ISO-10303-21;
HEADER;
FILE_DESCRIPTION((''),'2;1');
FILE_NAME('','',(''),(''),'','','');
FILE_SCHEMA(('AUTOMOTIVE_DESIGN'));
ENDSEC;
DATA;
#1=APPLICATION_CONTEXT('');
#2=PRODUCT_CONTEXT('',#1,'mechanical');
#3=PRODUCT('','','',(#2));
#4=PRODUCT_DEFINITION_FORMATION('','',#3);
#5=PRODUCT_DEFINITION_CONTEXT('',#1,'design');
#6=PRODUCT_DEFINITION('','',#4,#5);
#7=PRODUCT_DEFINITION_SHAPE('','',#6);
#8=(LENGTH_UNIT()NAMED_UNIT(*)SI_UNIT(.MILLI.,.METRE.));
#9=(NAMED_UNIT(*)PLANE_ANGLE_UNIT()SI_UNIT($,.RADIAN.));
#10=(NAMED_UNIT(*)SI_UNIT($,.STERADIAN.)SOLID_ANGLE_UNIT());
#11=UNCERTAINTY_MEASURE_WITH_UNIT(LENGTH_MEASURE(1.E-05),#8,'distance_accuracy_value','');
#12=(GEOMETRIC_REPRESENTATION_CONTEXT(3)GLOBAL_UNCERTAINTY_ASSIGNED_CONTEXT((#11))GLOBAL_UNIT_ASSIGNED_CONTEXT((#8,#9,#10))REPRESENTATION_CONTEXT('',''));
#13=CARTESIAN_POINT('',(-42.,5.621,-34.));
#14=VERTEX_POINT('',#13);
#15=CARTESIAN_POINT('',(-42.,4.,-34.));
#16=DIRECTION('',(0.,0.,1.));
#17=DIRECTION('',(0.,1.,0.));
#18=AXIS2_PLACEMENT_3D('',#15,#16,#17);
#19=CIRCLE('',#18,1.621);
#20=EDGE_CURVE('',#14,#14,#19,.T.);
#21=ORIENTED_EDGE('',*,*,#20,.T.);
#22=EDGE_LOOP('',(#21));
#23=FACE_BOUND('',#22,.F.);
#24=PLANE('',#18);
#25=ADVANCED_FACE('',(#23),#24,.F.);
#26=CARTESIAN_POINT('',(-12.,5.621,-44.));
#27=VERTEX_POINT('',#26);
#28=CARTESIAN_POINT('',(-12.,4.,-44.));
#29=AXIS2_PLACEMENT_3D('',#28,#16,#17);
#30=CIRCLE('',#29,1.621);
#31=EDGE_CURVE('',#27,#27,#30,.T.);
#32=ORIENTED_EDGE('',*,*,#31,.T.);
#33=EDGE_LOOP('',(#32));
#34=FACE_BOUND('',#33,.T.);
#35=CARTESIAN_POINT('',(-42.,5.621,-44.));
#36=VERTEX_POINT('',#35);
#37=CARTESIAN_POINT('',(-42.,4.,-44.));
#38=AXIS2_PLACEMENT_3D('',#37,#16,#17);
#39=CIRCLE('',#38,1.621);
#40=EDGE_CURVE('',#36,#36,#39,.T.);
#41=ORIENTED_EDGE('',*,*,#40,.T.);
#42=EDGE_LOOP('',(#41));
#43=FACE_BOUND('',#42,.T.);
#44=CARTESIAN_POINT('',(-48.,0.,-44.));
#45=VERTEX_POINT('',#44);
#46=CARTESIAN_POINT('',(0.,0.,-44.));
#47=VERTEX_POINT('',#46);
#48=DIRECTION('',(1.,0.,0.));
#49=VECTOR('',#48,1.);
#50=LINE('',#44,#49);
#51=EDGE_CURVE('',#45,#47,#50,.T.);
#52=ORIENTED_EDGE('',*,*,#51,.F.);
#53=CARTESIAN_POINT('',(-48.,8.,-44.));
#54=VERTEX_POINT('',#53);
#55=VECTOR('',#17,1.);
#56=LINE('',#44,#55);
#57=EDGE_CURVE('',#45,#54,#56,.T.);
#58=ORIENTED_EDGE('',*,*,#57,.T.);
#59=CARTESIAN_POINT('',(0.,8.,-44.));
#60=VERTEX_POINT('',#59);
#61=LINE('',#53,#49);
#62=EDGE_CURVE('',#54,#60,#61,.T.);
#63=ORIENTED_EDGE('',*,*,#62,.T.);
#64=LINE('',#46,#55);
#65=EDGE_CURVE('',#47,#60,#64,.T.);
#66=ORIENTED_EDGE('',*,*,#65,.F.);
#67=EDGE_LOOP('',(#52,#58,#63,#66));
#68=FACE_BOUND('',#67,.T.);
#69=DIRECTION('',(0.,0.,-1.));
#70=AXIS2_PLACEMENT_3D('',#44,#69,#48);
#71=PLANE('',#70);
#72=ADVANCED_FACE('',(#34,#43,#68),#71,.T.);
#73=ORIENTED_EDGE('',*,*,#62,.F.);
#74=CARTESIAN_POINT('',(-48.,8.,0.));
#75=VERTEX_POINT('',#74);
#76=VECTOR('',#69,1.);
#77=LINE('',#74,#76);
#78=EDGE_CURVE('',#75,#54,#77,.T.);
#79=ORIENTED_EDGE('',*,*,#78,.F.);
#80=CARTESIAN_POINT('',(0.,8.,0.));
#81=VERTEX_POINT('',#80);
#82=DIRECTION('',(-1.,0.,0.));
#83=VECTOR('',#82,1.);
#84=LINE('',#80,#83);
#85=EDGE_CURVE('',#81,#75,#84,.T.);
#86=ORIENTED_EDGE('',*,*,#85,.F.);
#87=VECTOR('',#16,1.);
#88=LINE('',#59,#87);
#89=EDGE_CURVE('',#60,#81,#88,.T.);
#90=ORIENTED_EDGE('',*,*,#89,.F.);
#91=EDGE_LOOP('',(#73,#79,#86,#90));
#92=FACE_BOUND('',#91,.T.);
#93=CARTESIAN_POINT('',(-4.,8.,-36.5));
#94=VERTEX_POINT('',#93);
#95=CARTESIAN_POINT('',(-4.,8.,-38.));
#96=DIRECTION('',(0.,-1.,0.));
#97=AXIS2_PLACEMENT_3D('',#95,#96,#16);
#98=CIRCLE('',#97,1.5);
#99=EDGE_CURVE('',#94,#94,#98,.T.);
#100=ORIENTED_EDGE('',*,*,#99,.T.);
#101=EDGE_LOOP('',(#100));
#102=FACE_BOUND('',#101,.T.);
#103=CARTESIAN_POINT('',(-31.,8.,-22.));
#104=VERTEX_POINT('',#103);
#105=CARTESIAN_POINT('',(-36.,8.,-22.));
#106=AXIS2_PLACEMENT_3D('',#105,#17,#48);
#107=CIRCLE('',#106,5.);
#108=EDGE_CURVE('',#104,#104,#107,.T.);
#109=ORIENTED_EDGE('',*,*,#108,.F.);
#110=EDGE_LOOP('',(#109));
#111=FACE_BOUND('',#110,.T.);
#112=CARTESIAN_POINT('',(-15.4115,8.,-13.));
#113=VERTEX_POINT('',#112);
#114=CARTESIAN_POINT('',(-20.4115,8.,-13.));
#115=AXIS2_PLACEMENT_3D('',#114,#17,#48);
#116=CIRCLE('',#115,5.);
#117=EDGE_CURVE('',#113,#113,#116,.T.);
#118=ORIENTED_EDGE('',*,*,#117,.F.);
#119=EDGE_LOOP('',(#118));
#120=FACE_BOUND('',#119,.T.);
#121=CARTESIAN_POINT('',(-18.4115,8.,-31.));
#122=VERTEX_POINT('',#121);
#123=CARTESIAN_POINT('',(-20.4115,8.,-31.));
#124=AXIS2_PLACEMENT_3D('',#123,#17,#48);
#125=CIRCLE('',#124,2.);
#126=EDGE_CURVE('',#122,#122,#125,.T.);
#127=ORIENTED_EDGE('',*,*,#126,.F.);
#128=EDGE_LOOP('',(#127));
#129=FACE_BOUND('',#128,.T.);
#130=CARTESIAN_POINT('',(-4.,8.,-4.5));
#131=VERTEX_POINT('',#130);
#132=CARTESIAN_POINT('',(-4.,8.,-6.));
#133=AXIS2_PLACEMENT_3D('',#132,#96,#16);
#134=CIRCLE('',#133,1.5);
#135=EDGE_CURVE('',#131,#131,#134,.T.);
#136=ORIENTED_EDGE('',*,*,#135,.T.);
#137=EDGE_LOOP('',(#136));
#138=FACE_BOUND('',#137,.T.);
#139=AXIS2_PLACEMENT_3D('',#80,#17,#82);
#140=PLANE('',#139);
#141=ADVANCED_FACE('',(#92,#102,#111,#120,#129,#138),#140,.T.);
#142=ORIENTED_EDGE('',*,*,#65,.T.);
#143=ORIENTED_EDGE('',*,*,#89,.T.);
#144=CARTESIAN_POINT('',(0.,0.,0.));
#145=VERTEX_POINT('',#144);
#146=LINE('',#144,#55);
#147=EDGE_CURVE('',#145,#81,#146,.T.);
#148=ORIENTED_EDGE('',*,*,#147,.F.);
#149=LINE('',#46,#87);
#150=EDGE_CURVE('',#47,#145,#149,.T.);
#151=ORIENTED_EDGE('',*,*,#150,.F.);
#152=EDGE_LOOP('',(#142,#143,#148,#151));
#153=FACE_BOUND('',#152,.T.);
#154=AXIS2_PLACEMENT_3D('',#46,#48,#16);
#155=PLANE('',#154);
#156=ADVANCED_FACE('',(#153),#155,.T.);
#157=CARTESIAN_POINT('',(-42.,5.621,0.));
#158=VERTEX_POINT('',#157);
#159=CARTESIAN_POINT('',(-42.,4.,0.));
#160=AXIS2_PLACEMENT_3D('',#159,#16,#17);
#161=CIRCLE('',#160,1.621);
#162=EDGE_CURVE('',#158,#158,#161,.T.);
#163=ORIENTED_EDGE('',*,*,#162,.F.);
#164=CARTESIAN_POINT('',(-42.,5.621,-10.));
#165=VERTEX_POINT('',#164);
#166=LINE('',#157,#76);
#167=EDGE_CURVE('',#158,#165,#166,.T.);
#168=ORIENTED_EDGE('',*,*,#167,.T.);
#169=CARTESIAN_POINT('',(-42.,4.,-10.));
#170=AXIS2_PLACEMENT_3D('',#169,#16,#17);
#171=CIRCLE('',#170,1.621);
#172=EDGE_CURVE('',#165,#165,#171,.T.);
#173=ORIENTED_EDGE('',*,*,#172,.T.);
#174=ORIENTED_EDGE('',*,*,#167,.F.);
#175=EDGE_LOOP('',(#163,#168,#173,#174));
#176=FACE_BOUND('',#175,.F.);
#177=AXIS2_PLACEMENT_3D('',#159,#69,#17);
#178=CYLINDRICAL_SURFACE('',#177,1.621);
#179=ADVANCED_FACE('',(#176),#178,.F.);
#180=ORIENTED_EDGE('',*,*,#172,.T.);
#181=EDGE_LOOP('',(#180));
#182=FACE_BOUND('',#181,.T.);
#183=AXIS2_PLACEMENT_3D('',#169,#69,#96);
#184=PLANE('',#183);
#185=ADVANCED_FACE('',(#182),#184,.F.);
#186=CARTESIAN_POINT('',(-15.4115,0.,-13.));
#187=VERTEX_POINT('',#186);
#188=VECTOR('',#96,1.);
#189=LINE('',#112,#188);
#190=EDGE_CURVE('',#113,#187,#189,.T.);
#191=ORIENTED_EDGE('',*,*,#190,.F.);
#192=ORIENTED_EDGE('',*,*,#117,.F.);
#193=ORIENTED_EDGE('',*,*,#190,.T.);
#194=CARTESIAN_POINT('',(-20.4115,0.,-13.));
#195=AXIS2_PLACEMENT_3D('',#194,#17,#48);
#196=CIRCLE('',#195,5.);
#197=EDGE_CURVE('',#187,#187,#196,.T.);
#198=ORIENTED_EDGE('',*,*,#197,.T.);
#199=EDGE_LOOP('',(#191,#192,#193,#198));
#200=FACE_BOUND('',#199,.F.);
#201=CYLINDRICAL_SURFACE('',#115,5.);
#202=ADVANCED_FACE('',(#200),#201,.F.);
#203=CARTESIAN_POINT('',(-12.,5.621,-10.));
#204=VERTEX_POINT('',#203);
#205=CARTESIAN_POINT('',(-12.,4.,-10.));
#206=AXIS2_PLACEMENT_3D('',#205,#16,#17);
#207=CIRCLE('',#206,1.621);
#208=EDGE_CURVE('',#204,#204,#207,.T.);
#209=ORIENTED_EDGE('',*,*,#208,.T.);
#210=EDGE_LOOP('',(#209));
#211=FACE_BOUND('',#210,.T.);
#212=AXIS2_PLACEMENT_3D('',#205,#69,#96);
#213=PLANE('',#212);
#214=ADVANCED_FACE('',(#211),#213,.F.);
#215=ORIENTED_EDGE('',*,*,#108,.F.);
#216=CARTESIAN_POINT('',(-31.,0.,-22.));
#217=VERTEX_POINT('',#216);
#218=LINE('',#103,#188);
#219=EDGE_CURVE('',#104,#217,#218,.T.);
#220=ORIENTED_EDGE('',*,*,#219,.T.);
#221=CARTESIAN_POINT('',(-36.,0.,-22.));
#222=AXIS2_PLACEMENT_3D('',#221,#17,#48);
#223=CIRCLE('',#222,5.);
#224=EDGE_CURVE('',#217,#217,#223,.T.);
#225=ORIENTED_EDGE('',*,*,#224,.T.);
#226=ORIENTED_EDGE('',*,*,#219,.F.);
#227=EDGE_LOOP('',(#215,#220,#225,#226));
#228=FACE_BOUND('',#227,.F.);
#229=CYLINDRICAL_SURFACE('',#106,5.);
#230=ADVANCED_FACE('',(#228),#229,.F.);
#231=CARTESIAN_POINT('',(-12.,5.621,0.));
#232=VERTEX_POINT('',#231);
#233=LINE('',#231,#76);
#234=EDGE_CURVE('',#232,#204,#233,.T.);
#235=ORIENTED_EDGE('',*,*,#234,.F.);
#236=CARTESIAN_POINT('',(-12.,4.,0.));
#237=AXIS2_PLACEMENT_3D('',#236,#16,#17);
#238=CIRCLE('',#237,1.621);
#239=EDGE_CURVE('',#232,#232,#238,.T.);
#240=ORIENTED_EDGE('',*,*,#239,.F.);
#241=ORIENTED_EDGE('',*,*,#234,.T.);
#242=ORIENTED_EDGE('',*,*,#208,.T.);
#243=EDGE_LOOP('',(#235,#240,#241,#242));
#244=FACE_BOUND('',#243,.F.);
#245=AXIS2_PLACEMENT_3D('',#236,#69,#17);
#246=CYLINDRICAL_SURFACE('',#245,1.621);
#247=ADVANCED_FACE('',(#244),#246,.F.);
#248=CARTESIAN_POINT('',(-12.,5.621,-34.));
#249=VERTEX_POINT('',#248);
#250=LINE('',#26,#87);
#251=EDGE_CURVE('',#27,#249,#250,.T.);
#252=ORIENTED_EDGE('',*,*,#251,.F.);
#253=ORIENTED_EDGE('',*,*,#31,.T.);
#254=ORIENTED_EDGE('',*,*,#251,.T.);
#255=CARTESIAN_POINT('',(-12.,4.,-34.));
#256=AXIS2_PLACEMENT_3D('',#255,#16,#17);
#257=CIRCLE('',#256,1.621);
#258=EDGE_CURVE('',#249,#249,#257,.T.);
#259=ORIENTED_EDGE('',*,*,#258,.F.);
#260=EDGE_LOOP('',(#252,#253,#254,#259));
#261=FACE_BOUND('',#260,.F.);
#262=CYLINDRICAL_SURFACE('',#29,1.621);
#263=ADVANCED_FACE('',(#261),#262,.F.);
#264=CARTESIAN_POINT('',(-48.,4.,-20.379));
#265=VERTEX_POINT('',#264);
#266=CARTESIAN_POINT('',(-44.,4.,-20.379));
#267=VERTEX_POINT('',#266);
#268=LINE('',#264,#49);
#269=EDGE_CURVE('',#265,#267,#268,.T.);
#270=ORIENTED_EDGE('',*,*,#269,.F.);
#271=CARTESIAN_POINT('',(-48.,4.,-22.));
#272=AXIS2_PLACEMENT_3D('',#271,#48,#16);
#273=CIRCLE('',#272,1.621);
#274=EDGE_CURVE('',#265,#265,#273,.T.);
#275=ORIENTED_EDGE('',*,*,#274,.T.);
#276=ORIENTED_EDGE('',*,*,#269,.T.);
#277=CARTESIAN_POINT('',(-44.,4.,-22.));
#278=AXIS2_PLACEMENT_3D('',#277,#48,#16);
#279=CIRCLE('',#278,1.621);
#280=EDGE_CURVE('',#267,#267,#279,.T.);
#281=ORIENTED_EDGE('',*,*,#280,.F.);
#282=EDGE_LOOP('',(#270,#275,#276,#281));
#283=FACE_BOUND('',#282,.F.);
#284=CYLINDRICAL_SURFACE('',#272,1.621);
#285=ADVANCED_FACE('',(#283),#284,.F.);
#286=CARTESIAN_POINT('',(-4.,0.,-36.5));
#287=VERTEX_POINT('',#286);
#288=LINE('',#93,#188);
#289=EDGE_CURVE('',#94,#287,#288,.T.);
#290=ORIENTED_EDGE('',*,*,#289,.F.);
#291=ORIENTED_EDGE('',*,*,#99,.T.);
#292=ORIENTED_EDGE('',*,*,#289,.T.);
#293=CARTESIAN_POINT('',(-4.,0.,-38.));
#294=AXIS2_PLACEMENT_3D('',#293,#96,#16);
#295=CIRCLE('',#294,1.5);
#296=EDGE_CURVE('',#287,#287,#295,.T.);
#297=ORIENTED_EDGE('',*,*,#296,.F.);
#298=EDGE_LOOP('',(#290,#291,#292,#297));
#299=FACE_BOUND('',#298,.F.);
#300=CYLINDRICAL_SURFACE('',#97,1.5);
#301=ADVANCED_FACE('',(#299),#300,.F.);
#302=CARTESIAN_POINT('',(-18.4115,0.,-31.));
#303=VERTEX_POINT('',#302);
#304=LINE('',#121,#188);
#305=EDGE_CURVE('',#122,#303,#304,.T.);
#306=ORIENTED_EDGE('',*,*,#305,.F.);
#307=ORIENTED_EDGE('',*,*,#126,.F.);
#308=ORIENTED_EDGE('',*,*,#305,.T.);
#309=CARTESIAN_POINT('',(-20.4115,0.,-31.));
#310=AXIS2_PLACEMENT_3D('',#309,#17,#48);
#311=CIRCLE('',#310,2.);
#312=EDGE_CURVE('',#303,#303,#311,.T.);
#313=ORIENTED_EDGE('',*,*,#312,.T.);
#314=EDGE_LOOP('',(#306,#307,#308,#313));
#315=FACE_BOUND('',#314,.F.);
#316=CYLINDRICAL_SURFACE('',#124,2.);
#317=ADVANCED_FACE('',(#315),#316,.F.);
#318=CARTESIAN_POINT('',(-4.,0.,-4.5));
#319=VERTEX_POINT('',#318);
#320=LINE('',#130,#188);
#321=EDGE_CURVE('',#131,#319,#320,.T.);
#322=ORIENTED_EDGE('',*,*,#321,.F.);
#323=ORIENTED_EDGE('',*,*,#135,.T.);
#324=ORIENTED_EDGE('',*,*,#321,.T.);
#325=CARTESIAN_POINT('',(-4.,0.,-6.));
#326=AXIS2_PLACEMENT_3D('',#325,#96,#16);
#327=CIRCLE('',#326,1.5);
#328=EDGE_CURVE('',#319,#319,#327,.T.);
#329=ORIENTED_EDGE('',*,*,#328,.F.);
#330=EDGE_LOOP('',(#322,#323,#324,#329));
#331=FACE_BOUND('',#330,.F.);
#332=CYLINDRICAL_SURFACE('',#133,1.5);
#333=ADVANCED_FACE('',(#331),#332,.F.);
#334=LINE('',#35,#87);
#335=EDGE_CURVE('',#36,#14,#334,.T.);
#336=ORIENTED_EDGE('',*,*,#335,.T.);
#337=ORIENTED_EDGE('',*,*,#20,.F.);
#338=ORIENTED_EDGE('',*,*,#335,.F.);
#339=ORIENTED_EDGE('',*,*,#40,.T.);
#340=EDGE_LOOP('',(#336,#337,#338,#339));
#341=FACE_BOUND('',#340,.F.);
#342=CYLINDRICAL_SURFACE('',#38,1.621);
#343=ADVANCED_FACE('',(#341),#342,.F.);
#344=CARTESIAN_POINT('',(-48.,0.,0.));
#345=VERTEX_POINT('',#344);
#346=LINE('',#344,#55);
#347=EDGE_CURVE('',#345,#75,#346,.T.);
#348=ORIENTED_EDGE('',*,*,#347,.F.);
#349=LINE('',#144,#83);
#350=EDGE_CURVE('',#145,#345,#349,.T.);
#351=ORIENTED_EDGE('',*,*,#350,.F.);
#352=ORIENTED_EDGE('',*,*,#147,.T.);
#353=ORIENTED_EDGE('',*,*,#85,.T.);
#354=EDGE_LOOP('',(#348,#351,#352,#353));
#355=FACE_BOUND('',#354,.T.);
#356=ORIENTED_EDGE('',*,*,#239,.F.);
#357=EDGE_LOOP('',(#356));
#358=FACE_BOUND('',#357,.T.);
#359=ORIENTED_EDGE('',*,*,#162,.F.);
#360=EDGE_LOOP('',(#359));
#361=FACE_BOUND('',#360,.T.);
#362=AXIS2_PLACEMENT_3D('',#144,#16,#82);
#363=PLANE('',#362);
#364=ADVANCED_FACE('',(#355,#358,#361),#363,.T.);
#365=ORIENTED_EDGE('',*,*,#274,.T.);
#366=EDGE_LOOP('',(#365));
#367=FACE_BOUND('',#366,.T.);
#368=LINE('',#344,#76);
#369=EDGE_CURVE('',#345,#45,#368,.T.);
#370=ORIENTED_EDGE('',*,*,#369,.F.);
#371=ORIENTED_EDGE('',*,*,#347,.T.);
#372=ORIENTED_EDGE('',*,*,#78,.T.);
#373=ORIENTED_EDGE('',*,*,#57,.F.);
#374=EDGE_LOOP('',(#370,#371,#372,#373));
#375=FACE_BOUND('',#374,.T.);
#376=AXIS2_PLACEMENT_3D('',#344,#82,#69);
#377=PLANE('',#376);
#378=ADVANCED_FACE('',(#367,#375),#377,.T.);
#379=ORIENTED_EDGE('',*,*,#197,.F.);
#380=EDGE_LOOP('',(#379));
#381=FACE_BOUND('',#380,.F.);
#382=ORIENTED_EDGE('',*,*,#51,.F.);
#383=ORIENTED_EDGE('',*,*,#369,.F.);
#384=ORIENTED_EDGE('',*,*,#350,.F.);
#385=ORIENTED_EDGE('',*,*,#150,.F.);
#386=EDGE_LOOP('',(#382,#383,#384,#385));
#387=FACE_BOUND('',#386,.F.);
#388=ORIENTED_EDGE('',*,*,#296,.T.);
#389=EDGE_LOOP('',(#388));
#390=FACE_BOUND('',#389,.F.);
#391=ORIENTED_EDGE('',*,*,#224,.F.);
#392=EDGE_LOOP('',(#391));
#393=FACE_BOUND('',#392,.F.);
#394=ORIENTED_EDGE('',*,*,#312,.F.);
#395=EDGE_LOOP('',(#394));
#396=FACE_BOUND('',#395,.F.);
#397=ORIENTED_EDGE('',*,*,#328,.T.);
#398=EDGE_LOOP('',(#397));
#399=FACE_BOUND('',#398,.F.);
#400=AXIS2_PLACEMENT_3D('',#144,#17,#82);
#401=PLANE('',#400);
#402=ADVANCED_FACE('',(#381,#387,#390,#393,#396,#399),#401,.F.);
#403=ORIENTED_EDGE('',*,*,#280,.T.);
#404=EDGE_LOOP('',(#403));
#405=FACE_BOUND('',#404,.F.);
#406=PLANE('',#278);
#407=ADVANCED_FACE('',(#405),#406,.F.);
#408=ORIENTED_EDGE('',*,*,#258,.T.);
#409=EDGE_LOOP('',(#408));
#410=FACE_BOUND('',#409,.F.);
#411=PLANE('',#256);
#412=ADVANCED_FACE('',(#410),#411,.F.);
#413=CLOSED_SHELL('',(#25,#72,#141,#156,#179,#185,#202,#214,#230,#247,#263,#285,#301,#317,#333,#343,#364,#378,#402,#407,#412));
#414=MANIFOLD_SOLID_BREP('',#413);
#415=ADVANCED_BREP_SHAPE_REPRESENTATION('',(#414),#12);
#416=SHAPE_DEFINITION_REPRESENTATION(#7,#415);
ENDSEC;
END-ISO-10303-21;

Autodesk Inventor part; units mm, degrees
ref_plane "YZ Plane" through (0, 0, 0) normal (1, 0, 0) x (0, 1, 0)
ref_plane "XZ Plane" through (0, 0, 0) normal (0, 1, 0) x (-1, 0, 0)
sketch "Skizze1" plane through (0, 0, 0) normal (0, 1, 0) x (-1, 0, 0)
  line L0 (0, 0) -> (48, 0)
  line L1 (48, 0) -> (48, -44)
  line L2 (48, -44) -> (0, -44)
  line L3 (0, -44) -> (0, 0)
  dimension "d0" = 44
  dimension "d1" = 48
extrude "Extrusion1" add sketch "Skizze1" along normal blind 8
sketch "Skizze2" plane through (0, 8, 0) normal (0, 1, 0) x (1, 0, 0)
  circle A0 centre (-36, 22) radius 5
  circle A1 centre (-20.4115, 13) radius 5
  circle A2 centre (-20.4115, 31) radius 2
  line L0 (0, 0) -> (0, 44) projected
  line L1 (0, 22) -> (-47.9314, 22) construction
  line L2 (-48, 44) -> (-48, 0) projected
  dimension "d4" = 9
  dimension "d5" = 12
  dimension "d6" = 10
  dimension "d7" = 18
  dimension "d8" = 10
  dimension "d9" = 4
extrude "Extrusion2" cut sketch "Skizze2" against normal up to surface (8 mm away)
sketch "Skizze3" plane through (-48, 0, -44) normal (-1, 0, 0) x (0, 0, 1)
  line L0 (44, 0) -> (44, 8) projected
  line L1 (0, 0) -> (44, 0) projected
  point P0 (22, 4)
  point P1 (44, 4)
  point P2 (22, 0)
hole "Bohrung1" at (-48, 4, -22) direction (1, 0, 0) diameter 3.242 depth 4 thread size "M4x0.7" class "6H" standard "ISO Metric profile"
sketch "Skizze4" plane through (0, 8, 0) normal (0, 1, 0) x (1, 0, 0)
  line L0 (0, 0) -> (0, 44) projected
  line L1 (-48, 0) -> (0, 0) projected
  point P0 (-4, 6)
  point P1 (-4, 38)
  dimension "d26" = 4
  dimension "d27" = 6
  dimension "d28" = 32
hole "Bohrung2" at (-4, 8, -6) at (-4, 8, -38) direction (0, -1, 0) diameter 3 depth 8
sketch "Skizze5" plane through (0, 0, -44) normal (0, 0, -1) x (-1, 0, 0)
  line L0 (48, 0) -> (48, 8) projected
  line L1 (0, 0) -> (0, 8) projected
  point P0 (12, 4)
  point P1 (42, 4)
  point P2 (48, 4)
  dimension "d36" = 30
  dimension "d37" = 12
hole "Bohrung3" at (-12, 4, -44) at (-42, 4, -44) direction (0, 0, 1) diameter 3.242 depth 10 thread size "M4x0.7" class "6H" standard "ISO Metric profile"
ref_plane "Arbeitsebene1" through (0, 0, -22) normal (0, 0, 1) x (1, 0, 0)
mirror "Spiegeln1" about plane through (0, 0, -22) normal (0, 0, 1) of "Bohrung3"
properties part number "1015"
